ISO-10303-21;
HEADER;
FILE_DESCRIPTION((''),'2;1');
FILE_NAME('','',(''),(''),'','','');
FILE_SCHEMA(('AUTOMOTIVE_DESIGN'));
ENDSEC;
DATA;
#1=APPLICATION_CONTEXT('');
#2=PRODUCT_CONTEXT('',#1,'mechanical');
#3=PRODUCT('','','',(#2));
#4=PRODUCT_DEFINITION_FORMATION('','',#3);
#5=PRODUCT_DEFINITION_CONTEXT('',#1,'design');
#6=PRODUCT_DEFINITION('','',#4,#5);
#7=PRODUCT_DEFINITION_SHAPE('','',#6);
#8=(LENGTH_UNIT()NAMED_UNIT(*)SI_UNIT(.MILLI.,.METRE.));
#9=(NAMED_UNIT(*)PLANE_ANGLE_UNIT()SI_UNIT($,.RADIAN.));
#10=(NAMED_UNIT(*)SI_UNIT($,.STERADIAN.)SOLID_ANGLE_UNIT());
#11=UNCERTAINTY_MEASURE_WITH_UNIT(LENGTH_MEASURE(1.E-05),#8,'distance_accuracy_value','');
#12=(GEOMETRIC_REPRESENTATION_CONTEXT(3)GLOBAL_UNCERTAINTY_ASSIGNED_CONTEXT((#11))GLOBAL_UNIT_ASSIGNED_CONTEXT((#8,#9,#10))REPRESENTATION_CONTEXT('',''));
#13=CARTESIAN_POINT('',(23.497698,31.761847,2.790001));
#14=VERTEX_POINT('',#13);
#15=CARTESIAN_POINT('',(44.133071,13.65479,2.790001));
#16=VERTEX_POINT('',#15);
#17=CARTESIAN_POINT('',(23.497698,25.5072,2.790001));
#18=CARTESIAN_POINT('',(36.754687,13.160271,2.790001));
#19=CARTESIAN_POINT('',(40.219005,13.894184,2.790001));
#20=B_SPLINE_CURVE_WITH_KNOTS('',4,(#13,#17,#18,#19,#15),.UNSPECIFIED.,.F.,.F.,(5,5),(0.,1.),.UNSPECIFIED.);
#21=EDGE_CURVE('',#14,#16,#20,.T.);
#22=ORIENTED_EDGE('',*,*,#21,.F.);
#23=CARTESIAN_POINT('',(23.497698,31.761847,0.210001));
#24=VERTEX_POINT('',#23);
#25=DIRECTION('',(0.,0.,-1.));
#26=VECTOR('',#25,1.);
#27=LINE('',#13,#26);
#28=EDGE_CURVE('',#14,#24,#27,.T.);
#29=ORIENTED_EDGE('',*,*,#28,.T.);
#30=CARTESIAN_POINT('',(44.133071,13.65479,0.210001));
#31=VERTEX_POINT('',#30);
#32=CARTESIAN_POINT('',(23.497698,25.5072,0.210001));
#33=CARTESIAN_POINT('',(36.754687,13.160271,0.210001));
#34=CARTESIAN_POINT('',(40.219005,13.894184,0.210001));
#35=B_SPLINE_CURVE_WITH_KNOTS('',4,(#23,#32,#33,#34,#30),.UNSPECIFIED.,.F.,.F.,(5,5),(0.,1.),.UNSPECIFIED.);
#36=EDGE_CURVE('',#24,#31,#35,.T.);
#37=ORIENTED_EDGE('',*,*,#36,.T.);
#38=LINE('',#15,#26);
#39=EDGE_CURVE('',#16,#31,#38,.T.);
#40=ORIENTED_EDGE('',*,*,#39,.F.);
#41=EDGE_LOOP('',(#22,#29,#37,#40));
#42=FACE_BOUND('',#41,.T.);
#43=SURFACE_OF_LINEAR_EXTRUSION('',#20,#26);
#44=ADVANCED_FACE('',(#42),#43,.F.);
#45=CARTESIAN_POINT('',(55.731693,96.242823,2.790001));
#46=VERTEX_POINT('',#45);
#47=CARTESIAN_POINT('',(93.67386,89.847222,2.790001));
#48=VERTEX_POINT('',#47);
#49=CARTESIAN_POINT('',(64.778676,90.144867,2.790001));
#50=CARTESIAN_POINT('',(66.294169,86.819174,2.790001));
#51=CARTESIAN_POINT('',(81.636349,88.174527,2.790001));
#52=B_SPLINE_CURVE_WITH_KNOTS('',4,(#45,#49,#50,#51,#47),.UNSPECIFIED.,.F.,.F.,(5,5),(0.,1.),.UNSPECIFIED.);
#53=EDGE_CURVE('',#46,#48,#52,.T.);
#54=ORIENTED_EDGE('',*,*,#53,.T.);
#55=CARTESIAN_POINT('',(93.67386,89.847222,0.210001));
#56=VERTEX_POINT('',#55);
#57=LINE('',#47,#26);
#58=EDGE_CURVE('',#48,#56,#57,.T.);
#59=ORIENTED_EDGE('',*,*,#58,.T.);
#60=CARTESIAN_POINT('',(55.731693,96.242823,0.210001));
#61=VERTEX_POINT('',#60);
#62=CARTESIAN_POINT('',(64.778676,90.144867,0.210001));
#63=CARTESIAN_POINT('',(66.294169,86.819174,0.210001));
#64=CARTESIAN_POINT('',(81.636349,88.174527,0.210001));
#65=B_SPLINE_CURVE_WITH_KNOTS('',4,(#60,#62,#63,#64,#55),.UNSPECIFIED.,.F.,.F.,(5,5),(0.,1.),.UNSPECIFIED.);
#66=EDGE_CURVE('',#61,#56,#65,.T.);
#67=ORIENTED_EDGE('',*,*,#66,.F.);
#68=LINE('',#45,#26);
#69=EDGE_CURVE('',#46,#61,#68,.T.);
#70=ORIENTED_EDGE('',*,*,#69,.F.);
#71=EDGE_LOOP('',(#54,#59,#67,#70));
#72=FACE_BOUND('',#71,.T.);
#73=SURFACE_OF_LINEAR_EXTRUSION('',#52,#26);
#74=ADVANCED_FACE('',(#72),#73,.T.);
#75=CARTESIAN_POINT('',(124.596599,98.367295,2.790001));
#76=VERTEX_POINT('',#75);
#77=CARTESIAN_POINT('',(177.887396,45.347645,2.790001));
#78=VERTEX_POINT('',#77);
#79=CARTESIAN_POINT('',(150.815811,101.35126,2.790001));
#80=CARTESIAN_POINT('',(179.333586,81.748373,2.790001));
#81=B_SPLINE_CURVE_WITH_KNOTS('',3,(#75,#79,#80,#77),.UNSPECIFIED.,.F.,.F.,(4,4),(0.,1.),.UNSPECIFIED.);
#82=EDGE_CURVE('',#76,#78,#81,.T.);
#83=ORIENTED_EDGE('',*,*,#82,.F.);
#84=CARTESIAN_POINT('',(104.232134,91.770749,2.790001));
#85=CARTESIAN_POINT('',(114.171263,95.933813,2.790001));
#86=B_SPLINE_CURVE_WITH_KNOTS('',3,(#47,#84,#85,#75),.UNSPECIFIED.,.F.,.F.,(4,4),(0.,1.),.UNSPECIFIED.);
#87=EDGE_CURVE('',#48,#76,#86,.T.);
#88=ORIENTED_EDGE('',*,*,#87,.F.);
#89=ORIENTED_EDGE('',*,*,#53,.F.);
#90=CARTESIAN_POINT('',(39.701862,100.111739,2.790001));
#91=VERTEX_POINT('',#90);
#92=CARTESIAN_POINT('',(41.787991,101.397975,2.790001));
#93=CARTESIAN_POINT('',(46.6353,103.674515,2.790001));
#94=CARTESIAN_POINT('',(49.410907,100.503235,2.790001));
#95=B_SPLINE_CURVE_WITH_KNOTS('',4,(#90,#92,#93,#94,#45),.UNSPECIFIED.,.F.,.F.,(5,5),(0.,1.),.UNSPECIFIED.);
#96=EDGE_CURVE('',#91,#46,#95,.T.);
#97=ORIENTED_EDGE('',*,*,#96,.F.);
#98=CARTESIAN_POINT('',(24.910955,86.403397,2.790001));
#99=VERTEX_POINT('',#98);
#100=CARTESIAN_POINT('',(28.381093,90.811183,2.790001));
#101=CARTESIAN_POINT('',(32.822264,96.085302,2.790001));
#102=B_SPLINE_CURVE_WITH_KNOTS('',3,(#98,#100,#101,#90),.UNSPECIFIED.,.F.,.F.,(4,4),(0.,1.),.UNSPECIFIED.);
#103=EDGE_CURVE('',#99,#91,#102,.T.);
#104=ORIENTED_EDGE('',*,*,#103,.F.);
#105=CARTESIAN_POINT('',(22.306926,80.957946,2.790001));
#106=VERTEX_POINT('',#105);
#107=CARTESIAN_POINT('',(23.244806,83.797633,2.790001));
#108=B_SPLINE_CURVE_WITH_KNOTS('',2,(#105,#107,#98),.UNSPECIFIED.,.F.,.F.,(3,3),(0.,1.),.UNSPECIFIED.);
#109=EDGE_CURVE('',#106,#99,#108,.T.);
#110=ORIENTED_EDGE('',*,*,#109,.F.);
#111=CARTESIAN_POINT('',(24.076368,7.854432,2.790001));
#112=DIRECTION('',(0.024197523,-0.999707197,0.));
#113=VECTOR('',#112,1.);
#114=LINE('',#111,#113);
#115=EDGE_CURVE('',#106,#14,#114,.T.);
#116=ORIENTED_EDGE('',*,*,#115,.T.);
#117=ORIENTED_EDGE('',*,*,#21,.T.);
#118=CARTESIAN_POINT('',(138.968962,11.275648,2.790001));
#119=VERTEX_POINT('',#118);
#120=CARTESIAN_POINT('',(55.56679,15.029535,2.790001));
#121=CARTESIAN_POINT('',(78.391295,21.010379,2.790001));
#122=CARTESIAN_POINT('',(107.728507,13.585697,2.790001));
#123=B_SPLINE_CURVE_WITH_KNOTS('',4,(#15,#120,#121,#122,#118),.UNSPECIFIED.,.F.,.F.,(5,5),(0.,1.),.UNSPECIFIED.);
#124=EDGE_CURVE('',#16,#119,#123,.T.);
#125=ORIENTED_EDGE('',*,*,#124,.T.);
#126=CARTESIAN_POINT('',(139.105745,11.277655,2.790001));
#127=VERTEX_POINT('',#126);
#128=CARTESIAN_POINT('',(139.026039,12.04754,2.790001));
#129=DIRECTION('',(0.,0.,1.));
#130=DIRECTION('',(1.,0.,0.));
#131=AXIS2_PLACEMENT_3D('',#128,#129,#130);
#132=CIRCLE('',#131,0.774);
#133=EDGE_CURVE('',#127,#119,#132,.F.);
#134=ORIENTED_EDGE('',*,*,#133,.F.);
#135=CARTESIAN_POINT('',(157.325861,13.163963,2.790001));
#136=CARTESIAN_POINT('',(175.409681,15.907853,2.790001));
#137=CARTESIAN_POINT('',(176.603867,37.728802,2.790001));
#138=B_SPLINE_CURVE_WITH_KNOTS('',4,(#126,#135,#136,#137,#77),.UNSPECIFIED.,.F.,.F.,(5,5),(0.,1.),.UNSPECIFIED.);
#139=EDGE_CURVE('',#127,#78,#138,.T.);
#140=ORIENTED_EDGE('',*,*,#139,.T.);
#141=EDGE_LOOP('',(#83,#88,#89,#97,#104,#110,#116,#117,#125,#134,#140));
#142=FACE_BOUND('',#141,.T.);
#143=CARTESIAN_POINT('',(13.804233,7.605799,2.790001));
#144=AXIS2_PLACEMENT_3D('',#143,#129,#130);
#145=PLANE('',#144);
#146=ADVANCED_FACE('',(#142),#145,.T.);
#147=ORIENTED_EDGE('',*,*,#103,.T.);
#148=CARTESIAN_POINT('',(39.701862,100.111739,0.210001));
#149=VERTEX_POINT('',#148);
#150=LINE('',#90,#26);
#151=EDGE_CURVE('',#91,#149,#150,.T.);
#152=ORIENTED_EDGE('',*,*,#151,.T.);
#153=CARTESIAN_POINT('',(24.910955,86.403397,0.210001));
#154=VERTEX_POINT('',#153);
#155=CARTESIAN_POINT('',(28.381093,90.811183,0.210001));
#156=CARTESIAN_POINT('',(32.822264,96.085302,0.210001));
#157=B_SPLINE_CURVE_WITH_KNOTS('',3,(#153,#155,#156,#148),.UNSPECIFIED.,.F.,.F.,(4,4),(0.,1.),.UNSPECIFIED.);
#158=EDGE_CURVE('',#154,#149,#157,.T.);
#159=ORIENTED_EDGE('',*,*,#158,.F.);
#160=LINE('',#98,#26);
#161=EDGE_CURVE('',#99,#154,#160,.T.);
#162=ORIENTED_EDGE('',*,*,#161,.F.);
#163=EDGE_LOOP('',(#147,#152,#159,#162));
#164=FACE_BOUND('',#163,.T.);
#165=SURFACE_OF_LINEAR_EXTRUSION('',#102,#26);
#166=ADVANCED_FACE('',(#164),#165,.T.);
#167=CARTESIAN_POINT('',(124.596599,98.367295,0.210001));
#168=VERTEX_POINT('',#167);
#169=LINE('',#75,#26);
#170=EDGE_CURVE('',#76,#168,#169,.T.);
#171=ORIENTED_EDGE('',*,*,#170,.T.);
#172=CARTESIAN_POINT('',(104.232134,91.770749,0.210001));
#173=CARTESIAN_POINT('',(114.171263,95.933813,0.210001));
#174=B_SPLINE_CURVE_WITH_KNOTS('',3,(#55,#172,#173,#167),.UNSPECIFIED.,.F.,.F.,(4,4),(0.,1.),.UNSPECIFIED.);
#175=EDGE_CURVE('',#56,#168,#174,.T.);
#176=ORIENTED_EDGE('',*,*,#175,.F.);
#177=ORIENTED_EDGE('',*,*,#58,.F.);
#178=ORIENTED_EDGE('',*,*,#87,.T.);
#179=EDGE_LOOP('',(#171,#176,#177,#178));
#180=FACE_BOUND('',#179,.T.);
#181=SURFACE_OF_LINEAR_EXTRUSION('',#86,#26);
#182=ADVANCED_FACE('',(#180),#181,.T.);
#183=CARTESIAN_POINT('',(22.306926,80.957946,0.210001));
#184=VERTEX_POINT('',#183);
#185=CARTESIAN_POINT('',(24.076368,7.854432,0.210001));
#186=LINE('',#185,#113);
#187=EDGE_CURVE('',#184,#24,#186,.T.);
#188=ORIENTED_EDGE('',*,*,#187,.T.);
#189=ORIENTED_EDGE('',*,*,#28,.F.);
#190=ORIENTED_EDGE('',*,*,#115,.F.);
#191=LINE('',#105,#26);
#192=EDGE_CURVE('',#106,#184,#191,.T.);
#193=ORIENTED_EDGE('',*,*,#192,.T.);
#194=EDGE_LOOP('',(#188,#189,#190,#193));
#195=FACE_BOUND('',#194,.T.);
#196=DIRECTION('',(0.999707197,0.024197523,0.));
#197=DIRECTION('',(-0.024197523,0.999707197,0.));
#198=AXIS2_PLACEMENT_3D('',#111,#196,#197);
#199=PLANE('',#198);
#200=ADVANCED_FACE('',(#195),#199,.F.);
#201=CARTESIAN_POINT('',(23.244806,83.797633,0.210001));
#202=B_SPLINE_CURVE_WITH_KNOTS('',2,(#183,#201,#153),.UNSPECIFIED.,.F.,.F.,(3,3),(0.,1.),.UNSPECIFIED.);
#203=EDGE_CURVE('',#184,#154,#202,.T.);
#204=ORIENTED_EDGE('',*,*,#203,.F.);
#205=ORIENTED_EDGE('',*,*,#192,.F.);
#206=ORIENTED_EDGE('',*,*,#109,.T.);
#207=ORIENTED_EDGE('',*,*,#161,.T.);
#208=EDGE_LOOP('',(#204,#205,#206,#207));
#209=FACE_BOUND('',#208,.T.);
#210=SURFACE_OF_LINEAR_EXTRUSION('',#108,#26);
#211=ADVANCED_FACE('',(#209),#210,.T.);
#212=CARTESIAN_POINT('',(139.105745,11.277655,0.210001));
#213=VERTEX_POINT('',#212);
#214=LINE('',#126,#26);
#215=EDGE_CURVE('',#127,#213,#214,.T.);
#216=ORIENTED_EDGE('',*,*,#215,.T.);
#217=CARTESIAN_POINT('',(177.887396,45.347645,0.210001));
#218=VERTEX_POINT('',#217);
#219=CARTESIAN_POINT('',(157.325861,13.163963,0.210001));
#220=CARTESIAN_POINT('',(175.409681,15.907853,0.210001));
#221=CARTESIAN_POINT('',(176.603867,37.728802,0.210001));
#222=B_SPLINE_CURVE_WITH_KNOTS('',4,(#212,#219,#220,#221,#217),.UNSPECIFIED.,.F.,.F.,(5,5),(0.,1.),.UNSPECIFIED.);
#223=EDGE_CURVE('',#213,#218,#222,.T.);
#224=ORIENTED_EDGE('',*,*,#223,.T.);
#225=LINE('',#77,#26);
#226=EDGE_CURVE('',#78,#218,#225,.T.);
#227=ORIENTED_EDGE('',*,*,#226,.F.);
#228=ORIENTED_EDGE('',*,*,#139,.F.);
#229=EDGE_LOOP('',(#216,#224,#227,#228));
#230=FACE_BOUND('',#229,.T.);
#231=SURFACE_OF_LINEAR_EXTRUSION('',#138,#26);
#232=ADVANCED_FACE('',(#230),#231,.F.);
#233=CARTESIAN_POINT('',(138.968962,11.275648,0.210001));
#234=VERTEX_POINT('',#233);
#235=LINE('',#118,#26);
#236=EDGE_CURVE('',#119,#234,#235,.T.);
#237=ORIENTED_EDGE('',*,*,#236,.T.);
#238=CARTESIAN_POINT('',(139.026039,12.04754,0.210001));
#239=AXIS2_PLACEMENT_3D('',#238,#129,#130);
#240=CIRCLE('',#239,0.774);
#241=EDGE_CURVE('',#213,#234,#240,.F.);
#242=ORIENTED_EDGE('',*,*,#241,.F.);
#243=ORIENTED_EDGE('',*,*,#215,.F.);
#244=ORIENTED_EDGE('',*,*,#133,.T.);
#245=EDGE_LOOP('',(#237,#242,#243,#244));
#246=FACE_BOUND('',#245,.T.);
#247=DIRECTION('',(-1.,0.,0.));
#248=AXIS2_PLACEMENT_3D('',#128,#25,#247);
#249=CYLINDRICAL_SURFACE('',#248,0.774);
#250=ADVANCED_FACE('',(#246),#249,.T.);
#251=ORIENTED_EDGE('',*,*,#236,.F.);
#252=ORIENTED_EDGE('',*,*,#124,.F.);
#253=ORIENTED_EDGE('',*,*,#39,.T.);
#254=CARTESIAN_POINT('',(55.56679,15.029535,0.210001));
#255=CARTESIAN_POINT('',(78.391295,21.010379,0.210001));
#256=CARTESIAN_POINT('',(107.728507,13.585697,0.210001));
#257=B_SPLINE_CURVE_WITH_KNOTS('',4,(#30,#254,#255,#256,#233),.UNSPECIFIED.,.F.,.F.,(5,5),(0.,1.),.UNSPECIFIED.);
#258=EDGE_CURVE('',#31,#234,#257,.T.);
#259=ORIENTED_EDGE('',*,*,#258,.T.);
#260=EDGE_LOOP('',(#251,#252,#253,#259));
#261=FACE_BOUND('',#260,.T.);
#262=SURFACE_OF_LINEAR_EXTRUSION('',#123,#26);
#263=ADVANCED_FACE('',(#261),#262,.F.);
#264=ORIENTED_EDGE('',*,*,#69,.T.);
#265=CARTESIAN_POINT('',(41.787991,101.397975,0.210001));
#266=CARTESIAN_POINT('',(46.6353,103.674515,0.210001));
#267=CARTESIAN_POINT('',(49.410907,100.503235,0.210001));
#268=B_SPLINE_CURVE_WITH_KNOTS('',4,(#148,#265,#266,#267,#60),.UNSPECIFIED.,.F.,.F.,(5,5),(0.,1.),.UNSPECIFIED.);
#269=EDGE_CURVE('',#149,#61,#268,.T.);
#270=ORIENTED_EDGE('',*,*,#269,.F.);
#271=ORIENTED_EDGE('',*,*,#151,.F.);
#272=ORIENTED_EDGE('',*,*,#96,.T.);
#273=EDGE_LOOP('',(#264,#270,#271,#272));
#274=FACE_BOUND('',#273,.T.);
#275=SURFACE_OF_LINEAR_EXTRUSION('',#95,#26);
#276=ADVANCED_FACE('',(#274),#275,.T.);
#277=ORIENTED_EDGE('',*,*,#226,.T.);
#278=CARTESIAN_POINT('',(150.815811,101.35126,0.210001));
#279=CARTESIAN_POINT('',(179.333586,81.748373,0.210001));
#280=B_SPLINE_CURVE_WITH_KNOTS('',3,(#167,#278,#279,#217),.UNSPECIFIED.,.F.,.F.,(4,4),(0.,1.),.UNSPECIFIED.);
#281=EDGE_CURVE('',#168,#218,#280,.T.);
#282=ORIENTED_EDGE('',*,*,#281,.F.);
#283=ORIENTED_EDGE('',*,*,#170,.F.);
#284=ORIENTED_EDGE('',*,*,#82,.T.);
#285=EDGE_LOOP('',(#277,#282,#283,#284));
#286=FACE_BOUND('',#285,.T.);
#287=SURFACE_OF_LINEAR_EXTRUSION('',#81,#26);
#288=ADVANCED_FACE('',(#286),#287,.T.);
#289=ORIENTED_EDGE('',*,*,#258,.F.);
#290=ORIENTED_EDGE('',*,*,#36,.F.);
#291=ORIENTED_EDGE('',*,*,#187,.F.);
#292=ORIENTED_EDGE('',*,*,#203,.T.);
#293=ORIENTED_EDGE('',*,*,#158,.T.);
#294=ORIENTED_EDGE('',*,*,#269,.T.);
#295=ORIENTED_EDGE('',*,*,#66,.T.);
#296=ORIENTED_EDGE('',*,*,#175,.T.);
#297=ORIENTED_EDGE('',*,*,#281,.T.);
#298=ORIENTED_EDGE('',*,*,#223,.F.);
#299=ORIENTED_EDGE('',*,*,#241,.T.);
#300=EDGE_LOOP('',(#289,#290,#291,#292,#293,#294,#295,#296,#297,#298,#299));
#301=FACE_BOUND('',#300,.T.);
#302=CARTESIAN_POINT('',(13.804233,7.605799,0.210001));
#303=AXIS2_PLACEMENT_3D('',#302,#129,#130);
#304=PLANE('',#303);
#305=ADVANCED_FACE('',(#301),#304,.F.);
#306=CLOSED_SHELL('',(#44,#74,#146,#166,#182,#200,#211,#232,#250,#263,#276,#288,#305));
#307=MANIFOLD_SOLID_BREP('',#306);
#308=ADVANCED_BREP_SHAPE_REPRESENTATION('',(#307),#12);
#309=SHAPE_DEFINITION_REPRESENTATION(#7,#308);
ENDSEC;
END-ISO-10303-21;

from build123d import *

# Parameters (mm, degrees)
BOSS_EXTRUDE4_DEPTH = 3
SCALE1_SCALE        = 0.86


# Read off the part's stored shape, not the designer's step: Boss-Extrude4
with BuildPart() as part:
    # Boss-Extrude4 outline → Boss-Extrude4 (new body)
    with BuildSketch(Plane.XY):
        with BuildLine():
            add(Edge.make_bspline(
                [(128.82833309, 105.536623813), (159.315788443, 109.006350456), (192.475992382, 86.212295483), (190.794375589, 43.885867645)],
                knots=[0, 0, 0, 0, 1, 1, 1, 1], degree=3))
            add(Edge.make_bspline(
                [(92.87165983, 95.629562044), (105.148722359, 97.866221646), (116.705848504, 102.706993295), (128.82833309, 105.536623813)],
                knots=[0, 0, 0, 0, 1, 1, 1, 1], degree=3))
            add(Edge.make_bspline(
                [(92.87165983, 95.629562044), (78.874553109, 93.684568119), (61.0348089, 92.108576277), (59.272608111, 95.97566045), (41.403108896, 108.020274617), (38.175658748, 111.707809956), (32.53925388, 109.060669967), (30.113522357, 107.565046253)],
                knots=[0, 0, 0, 0, 0, 1, 1, 1, 1.698662339, 1.698662339, 1.698662339, 1.698662339, 1.698662339], degree=4))
            add(Edge.make_bspline(
                [(12.914792947, 91.625113761), (16.949837177, 96.750446573), (22.113989283, 102.883143014), (30.113522357, 107.565046253)],
                knots=[0, 0, 0, 0, 1, 1, 1, 1], degree=3))
            add(Edge.make_bspline(
                [(9.886852416, 85.293194855), (10.97741097, 88.595155789), (12.914792947, 91.625113761)],
                knots=[0, 0, 0, 1, 1, 1], degree=2))
            Line((9.886852416, 85.293194855), (11.271471488, 28.088427646))
            add(Edge.make_bspline(
                [(11.271471488, 28.088427646), (11.271471488, 20.815583109), (26.686574013, 6.45868902), (30.71485135, 7.312076366), (35.266090121, 7.033710678)],
                knots=[0, 0, 0, 0, 0, 1, 1, 1, 1, 1], degree=4))
            add(Edge.make_bspline(
                [(35.266090121, 7.033710678), (48.561112758, 8.632251116), (75.101234368, 15.586721231), (109.214272404, 6.953370257), (145.540382928, 4.267266007)],
                knots=[0, 0, 0, 0, 0, 1, 1, 1, 1, 1], degree=4))
            ThreePointArc((145.540382928, 4.267266007), (145.619959196, 4.264912487), (145.69943212, 4.269600342))
            add(Edge.make_bspline(
                [(145.69943212, 4.269600342), (166.885614368, 6.462982074), (187.913311107, 9.653551401), (189.301900074, 35.0267482), (190.794375589, 43.885867645)],
                knots=[0, 0, 0, 0, 0, 1, 1, 1, 1, 1], degree=4))
        make_face()
    extrude(amount=BOSS_EXTRUDE4_DEPTH)


with BuildPart() as part_1:
    # Scale1: scaled about (98.605522213, 54.325229802, 1.5)
    add(part.part.scale(SCALE1_SCALE).moved(Location((13.80477311, 7.605532172, 0.21))))


solid = part_1.part
